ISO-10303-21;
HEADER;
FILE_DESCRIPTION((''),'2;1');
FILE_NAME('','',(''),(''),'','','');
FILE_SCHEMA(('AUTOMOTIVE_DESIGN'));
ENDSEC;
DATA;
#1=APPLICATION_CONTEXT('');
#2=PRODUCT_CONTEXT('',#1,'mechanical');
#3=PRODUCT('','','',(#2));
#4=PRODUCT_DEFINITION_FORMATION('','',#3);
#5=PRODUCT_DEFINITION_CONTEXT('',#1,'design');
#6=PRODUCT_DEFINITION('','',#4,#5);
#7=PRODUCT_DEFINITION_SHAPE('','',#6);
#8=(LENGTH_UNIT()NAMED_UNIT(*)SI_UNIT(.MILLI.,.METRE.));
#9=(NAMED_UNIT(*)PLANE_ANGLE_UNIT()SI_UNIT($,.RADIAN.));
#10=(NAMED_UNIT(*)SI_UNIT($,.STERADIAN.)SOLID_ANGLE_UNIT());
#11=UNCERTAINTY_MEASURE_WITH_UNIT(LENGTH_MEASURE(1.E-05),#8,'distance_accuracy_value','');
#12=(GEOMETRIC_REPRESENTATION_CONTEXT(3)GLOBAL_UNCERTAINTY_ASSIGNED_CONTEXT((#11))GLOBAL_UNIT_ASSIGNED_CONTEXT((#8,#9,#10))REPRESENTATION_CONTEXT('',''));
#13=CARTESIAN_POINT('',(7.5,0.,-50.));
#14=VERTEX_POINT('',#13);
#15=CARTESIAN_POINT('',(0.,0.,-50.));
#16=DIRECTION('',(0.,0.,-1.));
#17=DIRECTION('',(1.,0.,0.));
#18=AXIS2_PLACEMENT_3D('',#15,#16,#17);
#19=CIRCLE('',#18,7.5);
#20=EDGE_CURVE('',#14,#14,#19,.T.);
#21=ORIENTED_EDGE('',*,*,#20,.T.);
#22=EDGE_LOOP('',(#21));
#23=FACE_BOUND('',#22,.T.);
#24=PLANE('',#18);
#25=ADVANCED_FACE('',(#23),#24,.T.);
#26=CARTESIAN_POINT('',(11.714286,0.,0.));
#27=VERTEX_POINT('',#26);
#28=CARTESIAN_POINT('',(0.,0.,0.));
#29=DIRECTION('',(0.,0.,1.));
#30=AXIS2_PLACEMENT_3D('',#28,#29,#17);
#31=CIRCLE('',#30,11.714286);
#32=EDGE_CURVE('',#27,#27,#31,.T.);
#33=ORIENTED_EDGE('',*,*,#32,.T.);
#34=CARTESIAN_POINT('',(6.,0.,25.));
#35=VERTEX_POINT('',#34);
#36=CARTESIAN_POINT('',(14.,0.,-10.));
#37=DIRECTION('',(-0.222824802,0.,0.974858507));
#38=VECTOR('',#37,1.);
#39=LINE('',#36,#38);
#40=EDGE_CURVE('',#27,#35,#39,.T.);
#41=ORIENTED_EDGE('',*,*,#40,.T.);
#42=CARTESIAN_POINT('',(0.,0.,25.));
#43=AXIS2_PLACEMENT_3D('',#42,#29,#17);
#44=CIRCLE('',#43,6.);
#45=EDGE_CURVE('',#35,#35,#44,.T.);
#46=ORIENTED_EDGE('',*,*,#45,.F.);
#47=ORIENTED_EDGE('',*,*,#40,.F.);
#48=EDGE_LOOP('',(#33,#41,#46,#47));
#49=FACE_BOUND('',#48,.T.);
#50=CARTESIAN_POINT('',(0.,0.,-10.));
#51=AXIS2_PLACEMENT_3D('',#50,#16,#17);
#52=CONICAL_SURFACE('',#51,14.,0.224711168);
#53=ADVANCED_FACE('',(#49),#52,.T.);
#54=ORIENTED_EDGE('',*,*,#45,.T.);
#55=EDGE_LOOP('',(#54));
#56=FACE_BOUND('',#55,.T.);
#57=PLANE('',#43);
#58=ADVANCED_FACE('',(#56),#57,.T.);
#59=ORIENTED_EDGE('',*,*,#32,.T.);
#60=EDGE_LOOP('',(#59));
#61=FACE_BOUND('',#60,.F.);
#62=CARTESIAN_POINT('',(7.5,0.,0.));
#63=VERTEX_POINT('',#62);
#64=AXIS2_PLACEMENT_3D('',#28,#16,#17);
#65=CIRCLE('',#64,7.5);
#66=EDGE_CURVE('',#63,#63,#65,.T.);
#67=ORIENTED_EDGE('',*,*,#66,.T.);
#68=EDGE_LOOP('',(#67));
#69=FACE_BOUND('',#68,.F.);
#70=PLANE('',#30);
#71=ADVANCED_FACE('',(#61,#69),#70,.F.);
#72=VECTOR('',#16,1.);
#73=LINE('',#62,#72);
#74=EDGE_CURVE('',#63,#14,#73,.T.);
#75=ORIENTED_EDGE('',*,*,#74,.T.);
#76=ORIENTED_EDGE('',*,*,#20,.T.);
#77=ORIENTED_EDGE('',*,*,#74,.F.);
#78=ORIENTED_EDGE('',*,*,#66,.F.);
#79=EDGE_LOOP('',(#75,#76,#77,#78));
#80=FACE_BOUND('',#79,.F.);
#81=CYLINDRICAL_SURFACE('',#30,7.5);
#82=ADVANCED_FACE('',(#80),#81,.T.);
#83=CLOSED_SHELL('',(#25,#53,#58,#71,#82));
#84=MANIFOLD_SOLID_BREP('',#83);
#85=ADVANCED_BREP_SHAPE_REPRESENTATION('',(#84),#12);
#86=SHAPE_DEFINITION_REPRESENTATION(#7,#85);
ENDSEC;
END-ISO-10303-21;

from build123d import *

# Parameters (mm, degrees)
F0_R     = 14
F1_DEPTH = 25
F3_R     = 7.5
F4_DEPTH = 50


# Not quite as in the source:
# - a fillet or chamfer that OpenCascade refuses, or shapes differently, is made with other operations: its cross-section is extruded or revolved along the edge and cut away or added


with BuildPart() as f1:
    # F0 (on Top) → F1 (new body)
    with BuildSketch(Plane.XY):
        Circle(F0_R)
    extrude(amount=F1_DEPTH)

    # F2: chamfer of 8 x 35 on 1 edges, made by hand

    # F2_s1 → F2_t2 (revolve, cut)
    with BuildSketch(Plane.XZ):
        Polygon((14, -10), (6, 25), (14, 25), align=None)
    revolve(axis=Axis((0, 0, 25), (0, 0, 1)), mode=Mode.SUBTRACT)

    # F3 (on face) → F4 (join)
    with BuildSketch(Plane(origin=(0, 0, 0), x_dir=(1, 0, 0), z_dir=(0, 0, -1))):
        Circle(F3_R)
    extrude(amount=F4_DEPTH)


solid = f1.part
